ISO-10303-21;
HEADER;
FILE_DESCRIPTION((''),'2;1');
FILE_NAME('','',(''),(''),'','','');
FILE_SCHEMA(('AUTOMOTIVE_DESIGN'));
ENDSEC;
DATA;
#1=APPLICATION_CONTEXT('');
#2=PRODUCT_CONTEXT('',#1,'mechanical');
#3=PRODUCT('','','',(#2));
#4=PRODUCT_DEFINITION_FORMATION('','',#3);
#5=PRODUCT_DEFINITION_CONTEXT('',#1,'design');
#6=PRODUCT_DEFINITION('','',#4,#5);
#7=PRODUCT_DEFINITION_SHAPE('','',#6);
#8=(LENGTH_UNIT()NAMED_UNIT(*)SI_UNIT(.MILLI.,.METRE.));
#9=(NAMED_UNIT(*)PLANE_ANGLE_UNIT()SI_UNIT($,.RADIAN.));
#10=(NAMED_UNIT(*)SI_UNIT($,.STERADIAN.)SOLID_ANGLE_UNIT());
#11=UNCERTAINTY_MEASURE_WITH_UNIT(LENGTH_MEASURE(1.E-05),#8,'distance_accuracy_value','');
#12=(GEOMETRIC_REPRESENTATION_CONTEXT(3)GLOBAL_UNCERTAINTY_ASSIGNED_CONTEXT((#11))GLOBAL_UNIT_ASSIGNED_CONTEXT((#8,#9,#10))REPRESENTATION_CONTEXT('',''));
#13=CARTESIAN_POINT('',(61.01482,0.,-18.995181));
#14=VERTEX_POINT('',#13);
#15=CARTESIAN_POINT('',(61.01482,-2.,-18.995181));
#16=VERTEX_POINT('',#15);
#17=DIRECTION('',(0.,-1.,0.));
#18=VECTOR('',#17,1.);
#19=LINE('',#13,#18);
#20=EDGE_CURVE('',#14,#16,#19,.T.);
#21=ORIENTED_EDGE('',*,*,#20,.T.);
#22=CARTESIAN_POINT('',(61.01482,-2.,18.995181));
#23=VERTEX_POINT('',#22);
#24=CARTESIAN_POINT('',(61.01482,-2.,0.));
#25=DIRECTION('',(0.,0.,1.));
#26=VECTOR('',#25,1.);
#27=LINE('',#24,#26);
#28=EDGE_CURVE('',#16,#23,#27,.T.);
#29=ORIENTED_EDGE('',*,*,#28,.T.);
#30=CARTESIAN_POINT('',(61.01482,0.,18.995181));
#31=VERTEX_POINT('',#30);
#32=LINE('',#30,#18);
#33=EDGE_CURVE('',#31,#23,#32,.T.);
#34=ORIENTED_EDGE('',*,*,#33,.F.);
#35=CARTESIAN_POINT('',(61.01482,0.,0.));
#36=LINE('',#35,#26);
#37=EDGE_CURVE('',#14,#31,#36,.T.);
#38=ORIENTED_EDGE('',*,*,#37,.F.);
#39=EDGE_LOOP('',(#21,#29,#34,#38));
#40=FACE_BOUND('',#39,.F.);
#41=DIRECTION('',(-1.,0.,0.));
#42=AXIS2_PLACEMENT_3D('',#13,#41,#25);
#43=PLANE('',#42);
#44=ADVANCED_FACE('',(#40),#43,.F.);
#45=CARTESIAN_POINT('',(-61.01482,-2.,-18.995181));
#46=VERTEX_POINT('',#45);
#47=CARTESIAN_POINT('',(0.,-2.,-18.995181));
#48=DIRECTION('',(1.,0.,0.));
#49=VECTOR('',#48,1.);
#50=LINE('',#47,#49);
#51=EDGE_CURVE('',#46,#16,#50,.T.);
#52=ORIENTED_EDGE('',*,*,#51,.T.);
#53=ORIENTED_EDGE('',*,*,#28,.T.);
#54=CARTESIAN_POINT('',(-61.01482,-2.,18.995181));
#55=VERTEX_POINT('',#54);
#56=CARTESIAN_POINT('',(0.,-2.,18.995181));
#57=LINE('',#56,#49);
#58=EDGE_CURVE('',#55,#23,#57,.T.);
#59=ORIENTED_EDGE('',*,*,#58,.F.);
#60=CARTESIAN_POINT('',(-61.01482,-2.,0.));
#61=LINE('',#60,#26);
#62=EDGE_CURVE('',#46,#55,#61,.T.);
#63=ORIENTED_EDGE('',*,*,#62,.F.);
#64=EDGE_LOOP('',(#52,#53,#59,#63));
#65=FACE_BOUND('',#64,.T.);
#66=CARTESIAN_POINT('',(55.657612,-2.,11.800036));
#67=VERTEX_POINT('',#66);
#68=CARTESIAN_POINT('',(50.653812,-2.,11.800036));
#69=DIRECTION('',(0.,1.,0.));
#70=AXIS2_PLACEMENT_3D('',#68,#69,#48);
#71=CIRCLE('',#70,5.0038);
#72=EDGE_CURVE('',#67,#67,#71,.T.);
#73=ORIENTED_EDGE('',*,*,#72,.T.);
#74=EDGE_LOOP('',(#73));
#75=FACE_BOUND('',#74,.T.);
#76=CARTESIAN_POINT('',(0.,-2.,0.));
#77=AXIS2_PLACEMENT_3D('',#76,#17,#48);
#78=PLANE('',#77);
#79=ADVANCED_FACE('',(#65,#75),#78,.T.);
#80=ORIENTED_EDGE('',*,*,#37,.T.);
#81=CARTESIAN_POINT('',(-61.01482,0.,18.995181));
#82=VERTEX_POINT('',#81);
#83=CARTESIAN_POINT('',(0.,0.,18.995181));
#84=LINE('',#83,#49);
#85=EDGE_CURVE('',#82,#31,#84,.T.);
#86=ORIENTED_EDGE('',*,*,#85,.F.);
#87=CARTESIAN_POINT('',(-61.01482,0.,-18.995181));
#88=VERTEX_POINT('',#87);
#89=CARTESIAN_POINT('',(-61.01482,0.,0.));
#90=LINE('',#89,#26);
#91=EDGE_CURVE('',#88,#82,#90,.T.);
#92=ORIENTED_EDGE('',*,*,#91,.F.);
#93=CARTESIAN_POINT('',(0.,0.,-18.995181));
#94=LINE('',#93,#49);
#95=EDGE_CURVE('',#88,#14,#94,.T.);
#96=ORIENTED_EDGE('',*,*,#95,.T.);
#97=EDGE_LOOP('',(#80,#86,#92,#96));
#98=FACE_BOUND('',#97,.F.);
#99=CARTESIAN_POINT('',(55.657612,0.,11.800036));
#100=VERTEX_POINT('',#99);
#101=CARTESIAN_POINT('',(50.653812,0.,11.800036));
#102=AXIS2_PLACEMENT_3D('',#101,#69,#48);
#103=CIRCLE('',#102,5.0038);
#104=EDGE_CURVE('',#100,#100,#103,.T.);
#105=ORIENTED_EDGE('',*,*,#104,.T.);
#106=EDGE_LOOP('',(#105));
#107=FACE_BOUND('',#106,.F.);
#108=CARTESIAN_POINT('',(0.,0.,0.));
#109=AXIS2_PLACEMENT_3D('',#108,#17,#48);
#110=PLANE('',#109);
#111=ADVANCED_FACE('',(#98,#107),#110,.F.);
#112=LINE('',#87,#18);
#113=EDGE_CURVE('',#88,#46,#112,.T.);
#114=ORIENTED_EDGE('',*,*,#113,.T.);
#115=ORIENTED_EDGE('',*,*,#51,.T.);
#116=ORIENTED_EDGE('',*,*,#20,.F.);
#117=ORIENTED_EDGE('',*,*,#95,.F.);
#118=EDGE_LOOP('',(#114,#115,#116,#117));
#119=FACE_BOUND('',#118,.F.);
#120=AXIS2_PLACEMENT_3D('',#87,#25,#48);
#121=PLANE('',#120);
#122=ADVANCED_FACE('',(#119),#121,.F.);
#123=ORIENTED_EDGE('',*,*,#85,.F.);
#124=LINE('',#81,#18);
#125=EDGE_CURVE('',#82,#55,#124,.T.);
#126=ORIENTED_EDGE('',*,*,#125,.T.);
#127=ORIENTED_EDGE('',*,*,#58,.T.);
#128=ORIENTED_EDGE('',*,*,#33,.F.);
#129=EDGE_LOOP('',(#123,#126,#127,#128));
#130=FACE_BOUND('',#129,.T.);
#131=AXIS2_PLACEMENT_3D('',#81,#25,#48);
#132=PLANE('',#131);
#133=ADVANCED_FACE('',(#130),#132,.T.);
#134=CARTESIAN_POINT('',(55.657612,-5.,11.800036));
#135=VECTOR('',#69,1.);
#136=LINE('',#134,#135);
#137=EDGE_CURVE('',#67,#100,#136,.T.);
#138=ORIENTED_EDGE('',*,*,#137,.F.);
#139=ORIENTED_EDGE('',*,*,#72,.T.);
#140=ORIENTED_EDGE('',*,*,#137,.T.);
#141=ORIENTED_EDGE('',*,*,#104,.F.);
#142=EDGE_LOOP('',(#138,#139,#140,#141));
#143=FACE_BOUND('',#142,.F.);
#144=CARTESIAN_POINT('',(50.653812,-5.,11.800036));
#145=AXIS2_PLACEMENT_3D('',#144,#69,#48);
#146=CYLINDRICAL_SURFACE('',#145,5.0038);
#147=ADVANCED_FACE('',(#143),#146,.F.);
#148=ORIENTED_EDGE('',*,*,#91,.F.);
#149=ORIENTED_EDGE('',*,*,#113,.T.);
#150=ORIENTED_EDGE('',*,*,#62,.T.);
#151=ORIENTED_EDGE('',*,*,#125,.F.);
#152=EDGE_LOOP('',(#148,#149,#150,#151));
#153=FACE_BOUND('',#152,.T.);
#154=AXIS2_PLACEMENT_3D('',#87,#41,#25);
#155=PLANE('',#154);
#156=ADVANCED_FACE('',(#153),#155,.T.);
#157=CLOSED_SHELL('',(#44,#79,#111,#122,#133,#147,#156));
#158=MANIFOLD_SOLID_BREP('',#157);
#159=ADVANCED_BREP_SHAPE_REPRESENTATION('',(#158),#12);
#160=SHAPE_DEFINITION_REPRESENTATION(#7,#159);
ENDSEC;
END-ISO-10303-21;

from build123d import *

# Parameters (mm, degrees)
F0_W           = 122.0296397805
F0_H           = 37.9903614521
F3_DEPTH       = 2
F5_D           = 10
F5_CBORE_D     = 10.0076
F5_CBORE_DEPTH = 5


# Not quite as in the source:
# - the program builds the solid bodies; features that only make, move or delete a surface that nothing else refers to are left out


with BuildPart() as f3:
    # F0 (on Front) → F3 (new body)
    with BuildSketch(Plane.XZ):
        Rectangle(F0_W, F0_H)
    extrude(amount=F3_DEPTH)

    # F5 (through all)
    with Locations(Plane(origin=(0, 0, 0), x_dir=(1, 0, 0), z_dir=(0, 1, 0))):
        with Locations((50.6538115442, -11.8000358343)):
            CounterBoreHole(F5_D / 2, F5_CBORE_D / 2, F5_CBORE_DEPTH)


solid = f3.part
